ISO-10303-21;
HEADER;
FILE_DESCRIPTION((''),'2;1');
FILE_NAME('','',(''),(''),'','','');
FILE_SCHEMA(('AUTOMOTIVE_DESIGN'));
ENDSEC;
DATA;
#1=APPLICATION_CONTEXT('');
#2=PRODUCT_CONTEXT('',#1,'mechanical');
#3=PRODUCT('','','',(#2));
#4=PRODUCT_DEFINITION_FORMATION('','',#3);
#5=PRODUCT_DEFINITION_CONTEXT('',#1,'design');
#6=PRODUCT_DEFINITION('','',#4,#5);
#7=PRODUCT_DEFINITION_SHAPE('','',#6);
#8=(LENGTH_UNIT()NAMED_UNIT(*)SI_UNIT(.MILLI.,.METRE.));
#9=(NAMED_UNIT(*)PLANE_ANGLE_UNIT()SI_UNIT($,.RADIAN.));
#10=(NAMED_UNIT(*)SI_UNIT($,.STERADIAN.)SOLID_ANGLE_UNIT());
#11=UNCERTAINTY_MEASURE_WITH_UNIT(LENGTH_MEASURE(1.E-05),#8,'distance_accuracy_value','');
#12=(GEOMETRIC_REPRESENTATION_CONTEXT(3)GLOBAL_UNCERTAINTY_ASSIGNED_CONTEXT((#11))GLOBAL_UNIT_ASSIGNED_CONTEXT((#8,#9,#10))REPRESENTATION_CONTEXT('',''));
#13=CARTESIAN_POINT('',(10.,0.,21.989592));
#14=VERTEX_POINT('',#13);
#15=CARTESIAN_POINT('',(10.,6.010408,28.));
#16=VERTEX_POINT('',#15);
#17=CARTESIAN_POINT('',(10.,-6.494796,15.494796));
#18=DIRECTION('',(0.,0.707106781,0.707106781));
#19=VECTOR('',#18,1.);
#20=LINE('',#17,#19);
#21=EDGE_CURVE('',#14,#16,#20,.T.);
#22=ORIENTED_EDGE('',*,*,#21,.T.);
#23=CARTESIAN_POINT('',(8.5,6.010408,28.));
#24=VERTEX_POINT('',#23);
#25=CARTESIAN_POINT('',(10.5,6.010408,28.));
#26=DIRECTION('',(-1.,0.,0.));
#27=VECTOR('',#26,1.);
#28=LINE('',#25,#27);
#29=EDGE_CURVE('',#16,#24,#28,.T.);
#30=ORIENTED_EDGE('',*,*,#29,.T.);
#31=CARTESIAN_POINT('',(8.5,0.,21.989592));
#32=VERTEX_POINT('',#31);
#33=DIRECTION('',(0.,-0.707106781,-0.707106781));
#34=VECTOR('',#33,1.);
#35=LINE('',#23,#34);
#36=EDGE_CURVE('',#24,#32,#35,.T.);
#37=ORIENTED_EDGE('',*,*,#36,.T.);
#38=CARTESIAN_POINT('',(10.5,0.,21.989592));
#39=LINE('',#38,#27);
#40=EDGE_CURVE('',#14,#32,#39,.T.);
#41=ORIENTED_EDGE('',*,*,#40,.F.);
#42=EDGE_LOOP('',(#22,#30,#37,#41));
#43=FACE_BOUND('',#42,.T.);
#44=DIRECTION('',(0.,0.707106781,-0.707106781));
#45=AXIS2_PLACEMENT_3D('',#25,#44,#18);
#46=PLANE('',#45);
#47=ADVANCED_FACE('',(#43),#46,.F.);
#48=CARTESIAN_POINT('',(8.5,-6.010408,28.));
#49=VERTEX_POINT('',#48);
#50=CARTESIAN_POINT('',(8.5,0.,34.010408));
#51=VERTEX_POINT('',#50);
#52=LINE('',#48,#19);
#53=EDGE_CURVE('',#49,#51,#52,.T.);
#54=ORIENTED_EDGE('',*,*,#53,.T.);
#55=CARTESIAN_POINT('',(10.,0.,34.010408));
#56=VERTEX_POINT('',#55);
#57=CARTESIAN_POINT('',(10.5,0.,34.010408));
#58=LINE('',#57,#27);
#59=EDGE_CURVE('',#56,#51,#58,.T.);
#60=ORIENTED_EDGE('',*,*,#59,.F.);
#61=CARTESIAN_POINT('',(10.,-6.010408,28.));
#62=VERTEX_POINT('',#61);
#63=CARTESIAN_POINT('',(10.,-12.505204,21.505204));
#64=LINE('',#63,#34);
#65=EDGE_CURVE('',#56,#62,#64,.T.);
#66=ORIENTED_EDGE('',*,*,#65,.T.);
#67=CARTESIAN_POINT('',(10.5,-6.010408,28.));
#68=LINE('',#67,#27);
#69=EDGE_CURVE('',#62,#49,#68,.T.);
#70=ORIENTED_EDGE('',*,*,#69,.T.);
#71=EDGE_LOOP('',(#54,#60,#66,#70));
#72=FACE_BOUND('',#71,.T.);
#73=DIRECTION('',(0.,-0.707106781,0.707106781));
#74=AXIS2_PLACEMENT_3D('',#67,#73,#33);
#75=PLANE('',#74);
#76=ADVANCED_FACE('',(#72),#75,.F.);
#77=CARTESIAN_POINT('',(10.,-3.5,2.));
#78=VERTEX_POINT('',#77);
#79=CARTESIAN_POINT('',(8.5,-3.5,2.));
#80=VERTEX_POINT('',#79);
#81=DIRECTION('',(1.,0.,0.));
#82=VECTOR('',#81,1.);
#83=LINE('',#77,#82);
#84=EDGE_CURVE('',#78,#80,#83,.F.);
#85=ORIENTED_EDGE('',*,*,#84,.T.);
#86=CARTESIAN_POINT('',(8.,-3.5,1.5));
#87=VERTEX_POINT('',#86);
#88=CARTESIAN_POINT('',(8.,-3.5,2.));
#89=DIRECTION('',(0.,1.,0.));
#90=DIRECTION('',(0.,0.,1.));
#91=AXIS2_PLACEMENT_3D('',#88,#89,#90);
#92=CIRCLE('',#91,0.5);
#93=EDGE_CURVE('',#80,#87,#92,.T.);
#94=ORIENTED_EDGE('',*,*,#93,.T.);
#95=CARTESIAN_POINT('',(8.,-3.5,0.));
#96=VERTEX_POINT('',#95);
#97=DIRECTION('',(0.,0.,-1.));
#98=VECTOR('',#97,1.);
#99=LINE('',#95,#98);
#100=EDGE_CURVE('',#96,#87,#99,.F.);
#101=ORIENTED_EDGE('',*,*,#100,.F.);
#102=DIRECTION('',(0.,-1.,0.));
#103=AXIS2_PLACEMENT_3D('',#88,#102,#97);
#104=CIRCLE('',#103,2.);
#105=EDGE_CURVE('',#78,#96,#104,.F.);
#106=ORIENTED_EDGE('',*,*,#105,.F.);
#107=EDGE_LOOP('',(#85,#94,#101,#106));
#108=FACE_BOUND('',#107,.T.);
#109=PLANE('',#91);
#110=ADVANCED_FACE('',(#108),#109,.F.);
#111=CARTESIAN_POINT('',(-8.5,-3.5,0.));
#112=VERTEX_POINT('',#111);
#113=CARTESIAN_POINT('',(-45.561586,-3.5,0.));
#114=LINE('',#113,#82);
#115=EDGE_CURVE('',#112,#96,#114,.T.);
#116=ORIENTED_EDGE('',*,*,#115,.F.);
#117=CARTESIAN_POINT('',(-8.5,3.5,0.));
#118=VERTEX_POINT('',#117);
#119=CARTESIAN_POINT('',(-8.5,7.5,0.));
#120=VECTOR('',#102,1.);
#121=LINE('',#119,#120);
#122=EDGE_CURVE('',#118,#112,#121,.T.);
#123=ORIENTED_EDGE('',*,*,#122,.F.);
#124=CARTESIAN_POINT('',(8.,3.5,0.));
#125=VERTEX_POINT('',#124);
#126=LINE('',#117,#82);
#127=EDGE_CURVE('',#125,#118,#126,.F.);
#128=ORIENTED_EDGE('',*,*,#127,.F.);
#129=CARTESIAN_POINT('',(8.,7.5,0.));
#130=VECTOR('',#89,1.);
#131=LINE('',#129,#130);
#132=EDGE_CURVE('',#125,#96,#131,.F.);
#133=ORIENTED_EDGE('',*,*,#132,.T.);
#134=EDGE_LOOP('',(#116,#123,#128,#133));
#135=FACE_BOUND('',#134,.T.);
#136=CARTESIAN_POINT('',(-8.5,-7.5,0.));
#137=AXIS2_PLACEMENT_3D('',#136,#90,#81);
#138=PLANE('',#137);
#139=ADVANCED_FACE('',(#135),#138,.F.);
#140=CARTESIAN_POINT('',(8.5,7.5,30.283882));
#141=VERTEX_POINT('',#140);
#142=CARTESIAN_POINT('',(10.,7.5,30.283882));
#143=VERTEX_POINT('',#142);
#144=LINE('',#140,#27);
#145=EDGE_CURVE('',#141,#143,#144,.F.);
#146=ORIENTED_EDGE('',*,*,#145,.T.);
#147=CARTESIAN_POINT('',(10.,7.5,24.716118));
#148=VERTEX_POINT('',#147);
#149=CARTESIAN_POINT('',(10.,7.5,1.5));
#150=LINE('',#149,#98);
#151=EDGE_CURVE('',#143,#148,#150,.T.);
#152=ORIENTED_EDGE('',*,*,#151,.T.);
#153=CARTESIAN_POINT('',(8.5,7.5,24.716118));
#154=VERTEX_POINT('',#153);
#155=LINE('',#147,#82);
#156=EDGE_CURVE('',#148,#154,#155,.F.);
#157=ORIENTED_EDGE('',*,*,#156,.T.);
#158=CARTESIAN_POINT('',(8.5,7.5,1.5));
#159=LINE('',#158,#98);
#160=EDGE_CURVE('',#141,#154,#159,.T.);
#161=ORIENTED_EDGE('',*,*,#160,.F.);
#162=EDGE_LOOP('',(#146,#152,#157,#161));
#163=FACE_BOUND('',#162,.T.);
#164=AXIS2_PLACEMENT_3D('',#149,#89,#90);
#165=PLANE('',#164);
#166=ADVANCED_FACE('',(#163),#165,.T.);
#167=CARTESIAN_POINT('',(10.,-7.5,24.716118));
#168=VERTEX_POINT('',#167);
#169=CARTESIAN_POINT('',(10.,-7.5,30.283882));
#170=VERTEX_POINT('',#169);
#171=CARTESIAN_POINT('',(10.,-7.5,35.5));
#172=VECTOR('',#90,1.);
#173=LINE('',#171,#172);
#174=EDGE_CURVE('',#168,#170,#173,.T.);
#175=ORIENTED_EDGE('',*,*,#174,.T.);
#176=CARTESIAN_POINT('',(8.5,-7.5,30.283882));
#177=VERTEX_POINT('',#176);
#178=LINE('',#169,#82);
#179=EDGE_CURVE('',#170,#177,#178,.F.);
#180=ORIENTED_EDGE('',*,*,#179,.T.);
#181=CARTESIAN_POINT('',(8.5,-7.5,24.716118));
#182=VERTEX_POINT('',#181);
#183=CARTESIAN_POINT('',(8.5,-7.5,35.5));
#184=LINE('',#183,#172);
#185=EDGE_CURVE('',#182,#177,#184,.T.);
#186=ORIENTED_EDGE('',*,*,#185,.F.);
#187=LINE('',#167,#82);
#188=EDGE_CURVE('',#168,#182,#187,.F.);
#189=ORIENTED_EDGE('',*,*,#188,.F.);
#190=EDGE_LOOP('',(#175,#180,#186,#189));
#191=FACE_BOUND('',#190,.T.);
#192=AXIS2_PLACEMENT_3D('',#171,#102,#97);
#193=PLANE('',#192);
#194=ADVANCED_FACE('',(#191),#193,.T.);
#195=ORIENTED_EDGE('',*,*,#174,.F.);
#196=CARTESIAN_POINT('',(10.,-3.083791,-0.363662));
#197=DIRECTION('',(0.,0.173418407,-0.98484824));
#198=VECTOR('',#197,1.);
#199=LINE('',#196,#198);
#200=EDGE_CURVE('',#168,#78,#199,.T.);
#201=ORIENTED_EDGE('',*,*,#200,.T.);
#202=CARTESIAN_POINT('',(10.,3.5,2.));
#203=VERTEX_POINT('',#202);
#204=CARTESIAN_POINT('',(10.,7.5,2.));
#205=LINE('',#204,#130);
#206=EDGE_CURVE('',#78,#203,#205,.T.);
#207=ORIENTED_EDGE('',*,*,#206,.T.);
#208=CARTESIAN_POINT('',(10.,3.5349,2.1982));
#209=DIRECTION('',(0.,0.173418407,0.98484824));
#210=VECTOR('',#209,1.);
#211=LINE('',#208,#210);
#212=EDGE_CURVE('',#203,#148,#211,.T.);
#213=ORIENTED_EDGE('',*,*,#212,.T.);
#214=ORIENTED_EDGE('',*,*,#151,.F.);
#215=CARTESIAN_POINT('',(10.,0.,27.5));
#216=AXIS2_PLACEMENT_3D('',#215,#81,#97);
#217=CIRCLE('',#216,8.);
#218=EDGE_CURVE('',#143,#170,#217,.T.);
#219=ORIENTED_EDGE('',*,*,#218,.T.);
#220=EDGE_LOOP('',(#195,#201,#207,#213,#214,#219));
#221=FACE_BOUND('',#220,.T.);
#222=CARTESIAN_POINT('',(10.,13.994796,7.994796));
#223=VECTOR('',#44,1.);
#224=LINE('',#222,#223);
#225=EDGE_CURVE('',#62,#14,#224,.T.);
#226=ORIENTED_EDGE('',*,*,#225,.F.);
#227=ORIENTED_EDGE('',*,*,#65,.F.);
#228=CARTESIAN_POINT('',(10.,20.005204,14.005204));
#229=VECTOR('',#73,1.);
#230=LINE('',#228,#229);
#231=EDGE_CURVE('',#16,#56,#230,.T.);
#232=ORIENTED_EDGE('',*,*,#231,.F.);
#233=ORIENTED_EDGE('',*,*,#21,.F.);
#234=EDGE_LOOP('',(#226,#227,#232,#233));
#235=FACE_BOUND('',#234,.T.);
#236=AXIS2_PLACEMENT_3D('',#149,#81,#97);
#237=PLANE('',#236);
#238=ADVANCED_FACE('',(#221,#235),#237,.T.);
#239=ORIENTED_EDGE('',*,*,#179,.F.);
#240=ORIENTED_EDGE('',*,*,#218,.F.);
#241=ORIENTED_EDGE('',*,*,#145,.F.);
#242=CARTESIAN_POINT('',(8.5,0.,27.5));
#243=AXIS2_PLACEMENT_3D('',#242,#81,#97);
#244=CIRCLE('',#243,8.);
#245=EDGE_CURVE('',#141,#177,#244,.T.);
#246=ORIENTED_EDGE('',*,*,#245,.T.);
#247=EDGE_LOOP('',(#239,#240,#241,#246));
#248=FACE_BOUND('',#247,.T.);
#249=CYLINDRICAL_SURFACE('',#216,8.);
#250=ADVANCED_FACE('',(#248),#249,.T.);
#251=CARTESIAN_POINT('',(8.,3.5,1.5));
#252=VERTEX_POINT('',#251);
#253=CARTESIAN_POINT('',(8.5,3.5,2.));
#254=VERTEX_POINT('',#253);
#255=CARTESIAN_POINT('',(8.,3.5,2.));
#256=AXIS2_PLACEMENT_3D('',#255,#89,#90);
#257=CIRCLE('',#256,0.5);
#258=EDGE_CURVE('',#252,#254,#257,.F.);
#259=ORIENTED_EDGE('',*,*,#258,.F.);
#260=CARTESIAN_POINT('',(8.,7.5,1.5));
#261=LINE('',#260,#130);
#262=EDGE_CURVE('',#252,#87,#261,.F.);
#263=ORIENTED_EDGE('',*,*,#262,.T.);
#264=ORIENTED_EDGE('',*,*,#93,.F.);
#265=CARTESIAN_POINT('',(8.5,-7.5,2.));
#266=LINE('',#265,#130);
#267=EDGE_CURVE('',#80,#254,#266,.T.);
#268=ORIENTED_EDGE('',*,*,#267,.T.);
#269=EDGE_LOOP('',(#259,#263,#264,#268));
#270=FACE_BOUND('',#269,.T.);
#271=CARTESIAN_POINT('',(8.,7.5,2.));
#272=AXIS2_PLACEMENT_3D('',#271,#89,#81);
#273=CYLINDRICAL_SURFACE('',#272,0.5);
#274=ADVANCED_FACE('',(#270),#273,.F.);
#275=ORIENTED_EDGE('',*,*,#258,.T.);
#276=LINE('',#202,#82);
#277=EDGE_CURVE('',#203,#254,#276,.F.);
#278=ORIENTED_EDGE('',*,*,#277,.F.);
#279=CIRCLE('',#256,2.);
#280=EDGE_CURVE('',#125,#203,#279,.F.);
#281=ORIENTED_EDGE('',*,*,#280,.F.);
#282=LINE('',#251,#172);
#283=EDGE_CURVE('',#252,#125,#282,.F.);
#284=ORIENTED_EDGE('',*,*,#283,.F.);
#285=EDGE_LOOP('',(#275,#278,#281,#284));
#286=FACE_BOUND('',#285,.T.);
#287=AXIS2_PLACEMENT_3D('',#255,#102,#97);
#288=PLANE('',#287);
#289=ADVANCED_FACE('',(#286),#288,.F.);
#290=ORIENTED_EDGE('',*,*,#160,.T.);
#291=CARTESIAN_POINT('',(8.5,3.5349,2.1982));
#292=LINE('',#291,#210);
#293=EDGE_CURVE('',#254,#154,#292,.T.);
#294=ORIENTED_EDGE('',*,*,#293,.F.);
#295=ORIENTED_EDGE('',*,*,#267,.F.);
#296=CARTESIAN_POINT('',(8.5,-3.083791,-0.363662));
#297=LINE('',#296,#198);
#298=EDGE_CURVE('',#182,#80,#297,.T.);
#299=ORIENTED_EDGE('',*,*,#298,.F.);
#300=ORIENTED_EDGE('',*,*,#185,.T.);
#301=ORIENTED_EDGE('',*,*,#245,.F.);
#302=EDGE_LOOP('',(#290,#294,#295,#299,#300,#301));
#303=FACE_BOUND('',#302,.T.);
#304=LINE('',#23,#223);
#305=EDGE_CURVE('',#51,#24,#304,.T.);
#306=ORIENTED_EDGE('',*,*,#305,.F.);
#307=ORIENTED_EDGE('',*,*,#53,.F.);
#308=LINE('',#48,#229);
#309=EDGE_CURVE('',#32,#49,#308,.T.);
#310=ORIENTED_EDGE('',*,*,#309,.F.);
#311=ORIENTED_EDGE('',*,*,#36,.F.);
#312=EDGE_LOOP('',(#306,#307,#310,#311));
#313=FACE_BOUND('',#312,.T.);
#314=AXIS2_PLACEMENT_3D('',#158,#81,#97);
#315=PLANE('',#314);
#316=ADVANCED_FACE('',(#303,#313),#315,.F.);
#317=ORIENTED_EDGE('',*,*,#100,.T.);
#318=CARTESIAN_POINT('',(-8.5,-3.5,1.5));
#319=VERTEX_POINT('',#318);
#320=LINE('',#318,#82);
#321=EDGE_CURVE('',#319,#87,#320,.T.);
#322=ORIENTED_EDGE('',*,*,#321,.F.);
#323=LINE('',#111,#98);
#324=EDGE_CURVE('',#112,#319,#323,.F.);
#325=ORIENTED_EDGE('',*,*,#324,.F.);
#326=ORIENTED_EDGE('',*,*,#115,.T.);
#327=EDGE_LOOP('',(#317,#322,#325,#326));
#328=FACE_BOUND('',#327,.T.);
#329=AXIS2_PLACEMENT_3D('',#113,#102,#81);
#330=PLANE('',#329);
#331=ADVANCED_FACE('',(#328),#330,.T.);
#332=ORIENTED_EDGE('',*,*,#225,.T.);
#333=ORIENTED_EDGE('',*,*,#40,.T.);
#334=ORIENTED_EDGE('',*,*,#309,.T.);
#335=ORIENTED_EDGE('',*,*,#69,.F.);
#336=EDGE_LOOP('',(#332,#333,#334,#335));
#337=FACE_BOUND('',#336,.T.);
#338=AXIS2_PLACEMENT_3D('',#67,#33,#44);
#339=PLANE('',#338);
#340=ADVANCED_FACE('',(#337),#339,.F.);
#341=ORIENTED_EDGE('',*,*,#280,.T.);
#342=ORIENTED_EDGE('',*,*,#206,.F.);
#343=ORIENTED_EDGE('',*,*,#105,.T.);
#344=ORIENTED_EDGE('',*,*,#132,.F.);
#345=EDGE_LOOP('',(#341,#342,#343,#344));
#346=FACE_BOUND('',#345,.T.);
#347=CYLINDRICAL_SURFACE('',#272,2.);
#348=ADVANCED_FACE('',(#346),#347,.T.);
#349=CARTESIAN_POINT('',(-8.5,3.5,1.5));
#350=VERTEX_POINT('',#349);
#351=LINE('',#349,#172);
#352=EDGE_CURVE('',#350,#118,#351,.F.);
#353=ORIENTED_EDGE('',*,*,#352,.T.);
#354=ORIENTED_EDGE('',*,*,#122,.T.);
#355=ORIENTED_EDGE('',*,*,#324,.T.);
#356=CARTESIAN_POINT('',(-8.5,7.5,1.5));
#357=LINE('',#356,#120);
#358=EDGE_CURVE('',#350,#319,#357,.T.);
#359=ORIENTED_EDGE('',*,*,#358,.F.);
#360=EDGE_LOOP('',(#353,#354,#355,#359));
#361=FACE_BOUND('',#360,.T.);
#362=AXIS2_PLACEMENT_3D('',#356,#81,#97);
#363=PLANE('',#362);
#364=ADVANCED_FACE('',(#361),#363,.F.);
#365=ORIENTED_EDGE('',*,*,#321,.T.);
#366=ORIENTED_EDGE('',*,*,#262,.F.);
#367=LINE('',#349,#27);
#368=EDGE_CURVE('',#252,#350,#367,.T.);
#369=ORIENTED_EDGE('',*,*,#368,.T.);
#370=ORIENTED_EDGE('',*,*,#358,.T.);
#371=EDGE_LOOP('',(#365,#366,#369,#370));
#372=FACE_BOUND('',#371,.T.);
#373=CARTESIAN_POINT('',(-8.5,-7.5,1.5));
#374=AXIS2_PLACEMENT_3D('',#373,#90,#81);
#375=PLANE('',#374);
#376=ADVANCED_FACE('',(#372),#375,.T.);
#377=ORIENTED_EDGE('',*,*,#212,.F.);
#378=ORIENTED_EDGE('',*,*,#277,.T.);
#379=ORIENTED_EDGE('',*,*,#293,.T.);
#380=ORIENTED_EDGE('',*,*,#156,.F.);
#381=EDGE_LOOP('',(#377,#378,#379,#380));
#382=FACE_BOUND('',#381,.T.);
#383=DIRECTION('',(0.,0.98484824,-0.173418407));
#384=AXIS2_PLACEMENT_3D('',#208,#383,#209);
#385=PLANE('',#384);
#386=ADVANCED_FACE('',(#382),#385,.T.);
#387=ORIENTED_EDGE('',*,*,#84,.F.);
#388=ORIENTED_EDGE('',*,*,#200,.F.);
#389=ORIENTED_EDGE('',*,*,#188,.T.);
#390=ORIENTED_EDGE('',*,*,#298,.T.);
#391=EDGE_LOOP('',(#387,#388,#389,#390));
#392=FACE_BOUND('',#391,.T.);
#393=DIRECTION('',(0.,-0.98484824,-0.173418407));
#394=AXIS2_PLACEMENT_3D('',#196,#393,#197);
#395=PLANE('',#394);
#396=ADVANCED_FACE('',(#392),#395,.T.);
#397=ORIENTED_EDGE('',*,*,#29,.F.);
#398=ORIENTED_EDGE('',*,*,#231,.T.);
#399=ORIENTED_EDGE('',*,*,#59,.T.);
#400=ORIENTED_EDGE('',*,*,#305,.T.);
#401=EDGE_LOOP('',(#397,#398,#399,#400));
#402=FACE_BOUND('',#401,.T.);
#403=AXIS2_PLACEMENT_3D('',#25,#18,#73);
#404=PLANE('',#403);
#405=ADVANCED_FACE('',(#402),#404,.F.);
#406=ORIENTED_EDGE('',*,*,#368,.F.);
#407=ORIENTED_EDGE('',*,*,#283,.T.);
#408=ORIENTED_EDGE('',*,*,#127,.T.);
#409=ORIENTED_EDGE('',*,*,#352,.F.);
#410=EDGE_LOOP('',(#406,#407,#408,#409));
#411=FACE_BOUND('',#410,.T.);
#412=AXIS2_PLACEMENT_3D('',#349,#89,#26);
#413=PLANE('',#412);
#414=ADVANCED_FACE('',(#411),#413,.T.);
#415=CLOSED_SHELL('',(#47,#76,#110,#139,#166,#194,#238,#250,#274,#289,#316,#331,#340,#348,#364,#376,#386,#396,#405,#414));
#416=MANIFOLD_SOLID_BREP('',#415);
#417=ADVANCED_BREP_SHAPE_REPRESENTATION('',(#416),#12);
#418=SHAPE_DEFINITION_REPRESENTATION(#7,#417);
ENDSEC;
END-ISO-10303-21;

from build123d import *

# Parameters (mm, degrees)
SKETCH_2_W                       = 17
SKETCH_2_H                       = 15
SM_BASE_FLANGE_1_DEPTH           = 1.5
SM_EDGE_FLANGE_1_STRIP_W         = 7
SM_EDGE_FLANGE_1_STRIP_H         = 1.5
SM_EDGE_FLANGE_1_STRIP_CUT_DEPTH = 15
SM_EDGE_FLANGE_1_DEPTH           = 15
CUT_EXTRUDE_4_DEPTH              = 2
CUT_EXTRUDE_START                = -1.5
CUT_EXTRUDE_5_DEPTH              = 18.5


# Read off the part's stored shape, not the designer's step: 切除-拉伸5
# Sheet-metal steps are written as plain solids
with BuildPart() as part:
    # 草图2 → 基体-法兰1 (new body)
    with BuildSketch(Plane.XY):
        Rectangle(SKETCH_2_W, SKETCH_2_H)
    extrude(amount=SM_BASE_FLANGE_1_DEPTH)

    # 边线-法兰1 strip (across the edge) → 边线-法兰1 strip cut (cut)
    with BuildSketch(Plane(origin=(8.5, -7.5, 1.5), x_dir=(-1, 0, 0), z_dir=(0, 1, 0))):
        with Locations((-3, -0.75)):
            Rectangle(SM_EDGE_FLANGE_1_STRIP_W, SM_EDGE_FLANGE_1_STRIP_H)
    extrude(amount=SM_EDGE_FLANGE_1_STRIP_CUT_DEPTH, mode=Mode.SUBTRACT)

    # 边线-法兰1 section (across the edge) → 边线-法兰1 (add)
    with BuildSketch(Plane(origin=(8.5, -7.5, 1.5), x_dir=(-1, 0, 0), z_dir=(0, 1, 0))):
        with BuildLine():
            Line((-1.5, 0.5), (-1.5, 34))
            Line((-1.5, 34), (0, 34))
            Line((0, 34), (0, 0.5))
            ThreePointArc((0, 0.5), (0.146446609, 0.146446609), (0.5, 0))
            Line((0.5, 0), (0.5, -1.5))
            ThreePointArc((0.5, -1.5), (-0.914213562, -0.914213562), (-1.5, 0.5))
        make_face()
    extrude(amount=SM_EDGE_FLANGE_1_DEPTH)

    # 草图17 → 切除-拉伸4 (cut)
    with BuildSketch(Plane(origin=(8.5, 0, 0.26211679), x_dir=(0, 0, 1), z_dir=(-1, 0, 0))):
        Polygon((27.73788321, 6.01040764), (21.72747557, 0), (27.73788321, -6.01040764), (33.74829085, 0), align=None)
    extrude(amount=-CUT_EXTRUDE_4_DEPTH, mode=Mode.SUBTRACT)

    # 切除-拉伸5 outline → 切除-拉伸5 (cut)
    with BuildSketch(Plane(origin=(8.5, 0, 0.26211679), x_dir=(0, 0, 1), z_dir=(-1, 0, 0)).offset(CUT_EXTRUDE_START)):
        Polygon((1.73788321, 3.5), (24.454001029, 7.5), (-0.26211679, 7.5), (-0.26211679, 3.5), align=None)
        with BuildLine():
            Line((35.23788321, 7.5), (30.021765392, 7.5))
            ThreePointArc((30.021765392, 7.5), (33.805647573, 4.567764363), (35.23788321, 0))
            Line((35.23788321, 0), (35.23788321, 7.5))
        make_face()
        with BuildLine():
            Line((35.23788321, -7.5), (35.23788321, 0))
            ThreePointArc((35.23788321, 0), (33.805647573, -4.567764363), (30.021765392, -7.5))
            Line((30.021765392, -7.5), (35.23788321, -7.5))
        make_face()
        Polygon((-0.26211679, -7.5), (24.454001029, -7.5), (1.73788321, -3.5), (-0.26211679, -3.5), align=None)
    extrude(amount=CUT_EXTRUDE_5_DEPTH, mode=Mode.SUBTRACT)


solid = part.part
